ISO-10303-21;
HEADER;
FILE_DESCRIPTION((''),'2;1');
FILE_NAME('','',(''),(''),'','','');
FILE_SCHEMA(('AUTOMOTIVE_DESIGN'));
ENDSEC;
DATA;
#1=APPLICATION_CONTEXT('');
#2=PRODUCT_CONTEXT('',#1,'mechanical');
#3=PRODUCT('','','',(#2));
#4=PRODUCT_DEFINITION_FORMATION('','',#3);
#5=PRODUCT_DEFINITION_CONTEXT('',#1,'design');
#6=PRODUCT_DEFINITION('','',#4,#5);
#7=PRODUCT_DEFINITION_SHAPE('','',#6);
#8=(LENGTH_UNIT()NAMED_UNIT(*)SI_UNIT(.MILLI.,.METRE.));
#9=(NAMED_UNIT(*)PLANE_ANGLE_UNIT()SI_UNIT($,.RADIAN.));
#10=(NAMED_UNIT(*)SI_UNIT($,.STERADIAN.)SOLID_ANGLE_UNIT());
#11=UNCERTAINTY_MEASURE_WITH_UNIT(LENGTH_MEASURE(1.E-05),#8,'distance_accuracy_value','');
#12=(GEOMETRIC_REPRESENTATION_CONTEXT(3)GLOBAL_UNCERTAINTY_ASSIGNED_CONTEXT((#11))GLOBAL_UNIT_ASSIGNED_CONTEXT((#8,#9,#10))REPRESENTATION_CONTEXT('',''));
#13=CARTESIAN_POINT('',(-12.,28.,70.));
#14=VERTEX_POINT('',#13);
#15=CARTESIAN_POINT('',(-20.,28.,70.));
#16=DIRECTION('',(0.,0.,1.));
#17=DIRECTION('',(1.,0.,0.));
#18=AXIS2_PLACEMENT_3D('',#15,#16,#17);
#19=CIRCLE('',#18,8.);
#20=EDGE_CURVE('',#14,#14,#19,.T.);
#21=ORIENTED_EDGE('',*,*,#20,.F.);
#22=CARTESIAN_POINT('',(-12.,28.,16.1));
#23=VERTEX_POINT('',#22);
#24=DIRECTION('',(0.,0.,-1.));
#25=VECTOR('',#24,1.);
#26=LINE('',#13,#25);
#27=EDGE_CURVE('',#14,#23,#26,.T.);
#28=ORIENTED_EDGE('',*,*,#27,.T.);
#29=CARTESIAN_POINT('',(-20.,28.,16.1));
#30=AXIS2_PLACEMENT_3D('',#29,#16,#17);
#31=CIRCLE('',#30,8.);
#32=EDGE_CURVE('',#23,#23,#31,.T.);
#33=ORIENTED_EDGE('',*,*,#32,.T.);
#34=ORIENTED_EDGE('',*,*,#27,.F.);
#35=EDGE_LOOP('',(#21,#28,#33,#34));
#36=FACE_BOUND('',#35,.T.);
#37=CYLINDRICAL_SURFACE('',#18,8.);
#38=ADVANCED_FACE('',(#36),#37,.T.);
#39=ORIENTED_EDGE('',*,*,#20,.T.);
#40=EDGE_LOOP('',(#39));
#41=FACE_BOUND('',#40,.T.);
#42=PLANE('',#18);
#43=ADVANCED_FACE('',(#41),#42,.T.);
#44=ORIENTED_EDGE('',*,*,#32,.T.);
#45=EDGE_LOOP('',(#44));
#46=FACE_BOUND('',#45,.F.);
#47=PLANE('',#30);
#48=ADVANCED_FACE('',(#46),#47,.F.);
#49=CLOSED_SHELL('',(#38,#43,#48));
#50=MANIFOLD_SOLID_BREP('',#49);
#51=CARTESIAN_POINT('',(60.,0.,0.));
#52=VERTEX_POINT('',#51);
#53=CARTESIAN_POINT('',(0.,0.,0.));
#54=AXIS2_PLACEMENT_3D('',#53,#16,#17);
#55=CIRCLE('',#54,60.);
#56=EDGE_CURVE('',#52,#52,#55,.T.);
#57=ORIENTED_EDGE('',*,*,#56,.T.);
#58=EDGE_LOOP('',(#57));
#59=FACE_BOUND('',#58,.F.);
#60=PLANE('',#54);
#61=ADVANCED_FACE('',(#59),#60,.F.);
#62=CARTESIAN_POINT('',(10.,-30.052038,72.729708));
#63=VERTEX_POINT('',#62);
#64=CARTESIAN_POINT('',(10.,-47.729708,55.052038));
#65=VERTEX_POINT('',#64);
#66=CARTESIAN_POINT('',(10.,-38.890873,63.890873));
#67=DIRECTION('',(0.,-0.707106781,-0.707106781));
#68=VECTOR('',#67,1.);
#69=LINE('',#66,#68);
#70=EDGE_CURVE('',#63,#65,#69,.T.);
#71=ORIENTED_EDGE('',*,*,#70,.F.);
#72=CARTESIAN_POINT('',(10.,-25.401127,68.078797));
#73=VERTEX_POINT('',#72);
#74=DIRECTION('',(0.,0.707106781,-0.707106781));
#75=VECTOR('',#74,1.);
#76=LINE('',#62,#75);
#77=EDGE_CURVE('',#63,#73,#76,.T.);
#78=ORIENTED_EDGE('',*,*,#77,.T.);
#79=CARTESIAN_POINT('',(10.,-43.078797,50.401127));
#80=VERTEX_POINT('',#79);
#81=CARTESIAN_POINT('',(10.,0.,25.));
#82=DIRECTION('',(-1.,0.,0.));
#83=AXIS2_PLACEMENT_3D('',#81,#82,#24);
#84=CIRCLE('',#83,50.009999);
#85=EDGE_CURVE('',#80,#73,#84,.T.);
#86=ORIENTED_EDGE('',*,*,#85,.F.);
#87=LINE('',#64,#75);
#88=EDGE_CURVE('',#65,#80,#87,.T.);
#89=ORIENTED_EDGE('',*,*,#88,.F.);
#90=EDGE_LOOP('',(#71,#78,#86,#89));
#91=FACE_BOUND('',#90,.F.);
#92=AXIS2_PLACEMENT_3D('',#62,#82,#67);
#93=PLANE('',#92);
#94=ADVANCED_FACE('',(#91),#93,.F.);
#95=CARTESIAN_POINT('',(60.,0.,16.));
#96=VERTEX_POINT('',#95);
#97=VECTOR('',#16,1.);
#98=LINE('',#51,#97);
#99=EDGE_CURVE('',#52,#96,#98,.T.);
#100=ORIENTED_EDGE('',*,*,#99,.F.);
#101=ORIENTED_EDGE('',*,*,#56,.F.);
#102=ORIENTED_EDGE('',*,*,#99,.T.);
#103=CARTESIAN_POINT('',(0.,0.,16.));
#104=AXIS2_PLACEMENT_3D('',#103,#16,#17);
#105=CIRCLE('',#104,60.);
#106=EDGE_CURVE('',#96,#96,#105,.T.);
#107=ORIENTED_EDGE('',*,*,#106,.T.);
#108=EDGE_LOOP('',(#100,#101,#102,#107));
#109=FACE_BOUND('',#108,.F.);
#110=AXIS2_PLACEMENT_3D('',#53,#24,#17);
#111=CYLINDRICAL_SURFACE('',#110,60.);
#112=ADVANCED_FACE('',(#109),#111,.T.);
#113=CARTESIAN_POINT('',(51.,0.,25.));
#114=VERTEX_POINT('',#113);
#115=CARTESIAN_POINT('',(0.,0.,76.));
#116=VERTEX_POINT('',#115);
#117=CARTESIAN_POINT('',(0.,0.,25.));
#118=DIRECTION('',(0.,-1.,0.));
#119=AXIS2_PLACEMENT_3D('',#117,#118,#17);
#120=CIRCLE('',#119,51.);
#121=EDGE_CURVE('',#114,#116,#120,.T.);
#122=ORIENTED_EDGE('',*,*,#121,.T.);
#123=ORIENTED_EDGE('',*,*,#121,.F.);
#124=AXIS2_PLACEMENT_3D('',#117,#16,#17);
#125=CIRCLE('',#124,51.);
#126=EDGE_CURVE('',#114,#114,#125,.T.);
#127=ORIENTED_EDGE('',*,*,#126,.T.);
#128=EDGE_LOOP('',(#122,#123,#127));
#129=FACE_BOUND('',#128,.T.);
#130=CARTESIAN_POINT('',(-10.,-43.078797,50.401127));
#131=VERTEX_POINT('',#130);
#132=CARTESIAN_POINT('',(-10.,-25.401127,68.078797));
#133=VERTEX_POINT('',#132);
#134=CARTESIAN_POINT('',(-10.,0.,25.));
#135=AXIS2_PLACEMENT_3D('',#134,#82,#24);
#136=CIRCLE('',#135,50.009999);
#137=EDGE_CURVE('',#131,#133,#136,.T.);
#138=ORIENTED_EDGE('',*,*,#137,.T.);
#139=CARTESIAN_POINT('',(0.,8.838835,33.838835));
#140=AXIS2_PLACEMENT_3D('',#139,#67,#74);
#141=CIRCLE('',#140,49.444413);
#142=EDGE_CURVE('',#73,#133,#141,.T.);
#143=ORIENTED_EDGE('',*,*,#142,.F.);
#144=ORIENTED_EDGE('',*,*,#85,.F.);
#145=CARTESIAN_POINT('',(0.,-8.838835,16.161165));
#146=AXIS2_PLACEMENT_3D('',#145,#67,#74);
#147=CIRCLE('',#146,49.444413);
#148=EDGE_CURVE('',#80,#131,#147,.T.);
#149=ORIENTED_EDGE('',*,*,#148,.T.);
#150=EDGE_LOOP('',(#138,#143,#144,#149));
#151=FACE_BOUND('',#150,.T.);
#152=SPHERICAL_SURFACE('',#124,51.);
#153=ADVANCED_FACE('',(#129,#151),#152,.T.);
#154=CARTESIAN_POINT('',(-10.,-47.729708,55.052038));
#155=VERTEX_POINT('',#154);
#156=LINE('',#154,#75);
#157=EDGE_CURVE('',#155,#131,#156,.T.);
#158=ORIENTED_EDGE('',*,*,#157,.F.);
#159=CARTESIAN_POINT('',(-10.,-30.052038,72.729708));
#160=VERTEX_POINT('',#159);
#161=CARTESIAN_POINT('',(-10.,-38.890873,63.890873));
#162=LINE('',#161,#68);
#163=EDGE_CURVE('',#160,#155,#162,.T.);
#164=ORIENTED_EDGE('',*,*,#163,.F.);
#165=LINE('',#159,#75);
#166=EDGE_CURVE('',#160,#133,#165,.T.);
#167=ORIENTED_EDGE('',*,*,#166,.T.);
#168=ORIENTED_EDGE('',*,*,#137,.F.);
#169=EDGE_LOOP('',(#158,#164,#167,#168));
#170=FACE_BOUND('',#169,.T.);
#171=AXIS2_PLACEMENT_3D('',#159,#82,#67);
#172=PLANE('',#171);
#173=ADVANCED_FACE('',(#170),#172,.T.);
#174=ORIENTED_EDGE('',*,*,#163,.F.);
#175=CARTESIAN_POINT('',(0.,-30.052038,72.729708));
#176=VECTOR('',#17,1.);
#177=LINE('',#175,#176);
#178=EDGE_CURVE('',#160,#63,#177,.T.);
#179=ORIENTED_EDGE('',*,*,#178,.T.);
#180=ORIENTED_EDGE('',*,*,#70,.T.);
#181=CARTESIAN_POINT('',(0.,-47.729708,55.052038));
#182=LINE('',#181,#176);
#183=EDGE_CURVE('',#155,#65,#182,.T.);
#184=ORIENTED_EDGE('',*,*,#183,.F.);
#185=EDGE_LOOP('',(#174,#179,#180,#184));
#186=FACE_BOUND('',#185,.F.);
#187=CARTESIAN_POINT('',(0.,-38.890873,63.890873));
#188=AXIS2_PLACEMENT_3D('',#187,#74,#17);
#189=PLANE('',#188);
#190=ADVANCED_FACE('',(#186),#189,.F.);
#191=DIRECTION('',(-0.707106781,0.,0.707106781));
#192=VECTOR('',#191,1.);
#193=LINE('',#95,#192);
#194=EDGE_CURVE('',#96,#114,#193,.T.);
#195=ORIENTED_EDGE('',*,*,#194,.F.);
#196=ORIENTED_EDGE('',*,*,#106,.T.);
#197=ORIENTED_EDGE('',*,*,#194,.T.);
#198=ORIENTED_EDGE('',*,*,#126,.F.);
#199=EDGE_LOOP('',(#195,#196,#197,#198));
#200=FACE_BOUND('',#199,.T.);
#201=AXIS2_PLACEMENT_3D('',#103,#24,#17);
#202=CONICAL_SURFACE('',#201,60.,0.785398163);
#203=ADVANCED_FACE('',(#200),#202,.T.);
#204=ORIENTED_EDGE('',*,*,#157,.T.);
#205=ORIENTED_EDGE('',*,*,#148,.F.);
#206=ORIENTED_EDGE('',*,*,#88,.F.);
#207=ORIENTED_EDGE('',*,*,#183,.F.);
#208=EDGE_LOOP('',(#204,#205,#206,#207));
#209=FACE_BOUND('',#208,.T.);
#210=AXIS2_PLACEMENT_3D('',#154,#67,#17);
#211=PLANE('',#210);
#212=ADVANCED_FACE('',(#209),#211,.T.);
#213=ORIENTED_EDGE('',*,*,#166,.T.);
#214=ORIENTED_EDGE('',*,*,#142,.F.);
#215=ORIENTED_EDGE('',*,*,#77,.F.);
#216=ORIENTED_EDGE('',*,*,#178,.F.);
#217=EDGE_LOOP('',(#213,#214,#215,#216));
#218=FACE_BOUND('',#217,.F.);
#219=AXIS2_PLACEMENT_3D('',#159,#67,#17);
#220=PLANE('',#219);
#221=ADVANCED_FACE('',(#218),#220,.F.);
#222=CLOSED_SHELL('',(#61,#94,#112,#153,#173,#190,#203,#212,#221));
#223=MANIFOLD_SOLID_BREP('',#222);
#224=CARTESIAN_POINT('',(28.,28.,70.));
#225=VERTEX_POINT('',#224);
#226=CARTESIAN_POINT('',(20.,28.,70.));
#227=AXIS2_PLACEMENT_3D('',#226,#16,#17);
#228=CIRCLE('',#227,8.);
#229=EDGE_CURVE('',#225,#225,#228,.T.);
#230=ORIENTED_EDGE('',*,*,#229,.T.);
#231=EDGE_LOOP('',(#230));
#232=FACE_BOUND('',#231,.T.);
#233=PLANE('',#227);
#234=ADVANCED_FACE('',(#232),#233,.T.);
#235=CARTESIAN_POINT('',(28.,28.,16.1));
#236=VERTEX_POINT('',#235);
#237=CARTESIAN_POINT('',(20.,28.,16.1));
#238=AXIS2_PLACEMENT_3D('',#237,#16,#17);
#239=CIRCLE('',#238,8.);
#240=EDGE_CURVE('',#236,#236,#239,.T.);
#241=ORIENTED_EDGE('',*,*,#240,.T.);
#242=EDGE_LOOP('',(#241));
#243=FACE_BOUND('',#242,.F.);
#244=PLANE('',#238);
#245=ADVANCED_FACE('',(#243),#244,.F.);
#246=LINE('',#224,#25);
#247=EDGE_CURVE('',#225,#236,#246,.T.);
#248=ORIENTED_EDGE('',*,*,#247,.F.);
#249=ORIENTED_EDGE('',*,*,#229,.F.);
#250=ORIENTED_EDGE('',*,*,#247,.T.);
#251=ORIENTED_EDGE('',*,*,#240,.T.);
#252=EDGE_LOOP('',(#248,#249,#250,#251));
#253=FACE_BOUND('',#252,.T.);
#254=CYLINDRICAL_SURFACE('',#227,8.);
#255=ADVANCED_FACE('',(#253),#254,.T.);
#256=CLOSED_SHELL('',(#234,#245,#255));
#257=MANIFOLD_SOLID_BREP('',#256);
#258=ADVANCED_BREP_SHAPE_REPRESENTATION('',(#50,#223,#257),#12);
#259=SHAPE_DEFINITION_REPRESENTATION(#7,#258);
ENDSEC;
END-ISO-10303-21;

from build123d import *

# Parameters (mm, degrees)
F0_R      = 60
F1_DEPTH  = 25
F2_SIZE   = 9
F6_R      = 8
F7_DEPTH  = 53.9
F12_W     = 20
F12_H     = 25
F13_DEPTH = 35


with BuildPart() as f1:
    # F0 (on Top) → F1 (new body)
    with BuildSketch(Plane.XY):
        Circle(F0_R)
    extrude(amount=F1_DEPTH)

    # F2
    f2_edges = [f1.edges().sort_by_distance(p)[0] for p in [
        (-60, 0, 25),
    ]]
    chamfer(f2_edges, length=F2_SIZE)

    # F3 (on Front) → F4 (revolve)
    with BuildSketch(Plane.XZ):
        with BuildLine():
            Line((0, 25), (51, 25))
            ThreePointArc((51, 25), (36.0624458405, 61.0624458405), (0, 76))
            Line((0, 76), (0, 25))
        make_face()
    revolve(axis=Axis((0, 0, 50.5), (0, 0, 1)))

    # F12 (on face) → F13 (join)
    with BuildSketch(Plane(origin=(0, -51.3908729653, 51.3908729653), x_dir=(1, 0, 0), z_dir=(0, 0.7071067812, -0.7071067812))):
        with Locations((0, -17.6776695297)):
            Rectangle(F12_W, F12_H)
    extrude(amount=F13_DEPTH)


with BuildPart() as f7:
    # F6 (on offset) → F7 (new body)
    with BuildSketch(Plane.XY.offset(70)):
        with Locations((-20, 28)):
            Circle(F6_R)
    extrude(amount=-F7_DEPTH)


with BuildPart() as f7b:
    # F6 (on offset) → F7, piece 2 (new body)
    with BuildSketch(Plane.XY.offset(70)):
        with Locations((20, 28)):
            Circle(F6_R)
    extrude(amount=-F7_DEPTH)


solid = Compound([f1.part, f7.part, f7b.part])
